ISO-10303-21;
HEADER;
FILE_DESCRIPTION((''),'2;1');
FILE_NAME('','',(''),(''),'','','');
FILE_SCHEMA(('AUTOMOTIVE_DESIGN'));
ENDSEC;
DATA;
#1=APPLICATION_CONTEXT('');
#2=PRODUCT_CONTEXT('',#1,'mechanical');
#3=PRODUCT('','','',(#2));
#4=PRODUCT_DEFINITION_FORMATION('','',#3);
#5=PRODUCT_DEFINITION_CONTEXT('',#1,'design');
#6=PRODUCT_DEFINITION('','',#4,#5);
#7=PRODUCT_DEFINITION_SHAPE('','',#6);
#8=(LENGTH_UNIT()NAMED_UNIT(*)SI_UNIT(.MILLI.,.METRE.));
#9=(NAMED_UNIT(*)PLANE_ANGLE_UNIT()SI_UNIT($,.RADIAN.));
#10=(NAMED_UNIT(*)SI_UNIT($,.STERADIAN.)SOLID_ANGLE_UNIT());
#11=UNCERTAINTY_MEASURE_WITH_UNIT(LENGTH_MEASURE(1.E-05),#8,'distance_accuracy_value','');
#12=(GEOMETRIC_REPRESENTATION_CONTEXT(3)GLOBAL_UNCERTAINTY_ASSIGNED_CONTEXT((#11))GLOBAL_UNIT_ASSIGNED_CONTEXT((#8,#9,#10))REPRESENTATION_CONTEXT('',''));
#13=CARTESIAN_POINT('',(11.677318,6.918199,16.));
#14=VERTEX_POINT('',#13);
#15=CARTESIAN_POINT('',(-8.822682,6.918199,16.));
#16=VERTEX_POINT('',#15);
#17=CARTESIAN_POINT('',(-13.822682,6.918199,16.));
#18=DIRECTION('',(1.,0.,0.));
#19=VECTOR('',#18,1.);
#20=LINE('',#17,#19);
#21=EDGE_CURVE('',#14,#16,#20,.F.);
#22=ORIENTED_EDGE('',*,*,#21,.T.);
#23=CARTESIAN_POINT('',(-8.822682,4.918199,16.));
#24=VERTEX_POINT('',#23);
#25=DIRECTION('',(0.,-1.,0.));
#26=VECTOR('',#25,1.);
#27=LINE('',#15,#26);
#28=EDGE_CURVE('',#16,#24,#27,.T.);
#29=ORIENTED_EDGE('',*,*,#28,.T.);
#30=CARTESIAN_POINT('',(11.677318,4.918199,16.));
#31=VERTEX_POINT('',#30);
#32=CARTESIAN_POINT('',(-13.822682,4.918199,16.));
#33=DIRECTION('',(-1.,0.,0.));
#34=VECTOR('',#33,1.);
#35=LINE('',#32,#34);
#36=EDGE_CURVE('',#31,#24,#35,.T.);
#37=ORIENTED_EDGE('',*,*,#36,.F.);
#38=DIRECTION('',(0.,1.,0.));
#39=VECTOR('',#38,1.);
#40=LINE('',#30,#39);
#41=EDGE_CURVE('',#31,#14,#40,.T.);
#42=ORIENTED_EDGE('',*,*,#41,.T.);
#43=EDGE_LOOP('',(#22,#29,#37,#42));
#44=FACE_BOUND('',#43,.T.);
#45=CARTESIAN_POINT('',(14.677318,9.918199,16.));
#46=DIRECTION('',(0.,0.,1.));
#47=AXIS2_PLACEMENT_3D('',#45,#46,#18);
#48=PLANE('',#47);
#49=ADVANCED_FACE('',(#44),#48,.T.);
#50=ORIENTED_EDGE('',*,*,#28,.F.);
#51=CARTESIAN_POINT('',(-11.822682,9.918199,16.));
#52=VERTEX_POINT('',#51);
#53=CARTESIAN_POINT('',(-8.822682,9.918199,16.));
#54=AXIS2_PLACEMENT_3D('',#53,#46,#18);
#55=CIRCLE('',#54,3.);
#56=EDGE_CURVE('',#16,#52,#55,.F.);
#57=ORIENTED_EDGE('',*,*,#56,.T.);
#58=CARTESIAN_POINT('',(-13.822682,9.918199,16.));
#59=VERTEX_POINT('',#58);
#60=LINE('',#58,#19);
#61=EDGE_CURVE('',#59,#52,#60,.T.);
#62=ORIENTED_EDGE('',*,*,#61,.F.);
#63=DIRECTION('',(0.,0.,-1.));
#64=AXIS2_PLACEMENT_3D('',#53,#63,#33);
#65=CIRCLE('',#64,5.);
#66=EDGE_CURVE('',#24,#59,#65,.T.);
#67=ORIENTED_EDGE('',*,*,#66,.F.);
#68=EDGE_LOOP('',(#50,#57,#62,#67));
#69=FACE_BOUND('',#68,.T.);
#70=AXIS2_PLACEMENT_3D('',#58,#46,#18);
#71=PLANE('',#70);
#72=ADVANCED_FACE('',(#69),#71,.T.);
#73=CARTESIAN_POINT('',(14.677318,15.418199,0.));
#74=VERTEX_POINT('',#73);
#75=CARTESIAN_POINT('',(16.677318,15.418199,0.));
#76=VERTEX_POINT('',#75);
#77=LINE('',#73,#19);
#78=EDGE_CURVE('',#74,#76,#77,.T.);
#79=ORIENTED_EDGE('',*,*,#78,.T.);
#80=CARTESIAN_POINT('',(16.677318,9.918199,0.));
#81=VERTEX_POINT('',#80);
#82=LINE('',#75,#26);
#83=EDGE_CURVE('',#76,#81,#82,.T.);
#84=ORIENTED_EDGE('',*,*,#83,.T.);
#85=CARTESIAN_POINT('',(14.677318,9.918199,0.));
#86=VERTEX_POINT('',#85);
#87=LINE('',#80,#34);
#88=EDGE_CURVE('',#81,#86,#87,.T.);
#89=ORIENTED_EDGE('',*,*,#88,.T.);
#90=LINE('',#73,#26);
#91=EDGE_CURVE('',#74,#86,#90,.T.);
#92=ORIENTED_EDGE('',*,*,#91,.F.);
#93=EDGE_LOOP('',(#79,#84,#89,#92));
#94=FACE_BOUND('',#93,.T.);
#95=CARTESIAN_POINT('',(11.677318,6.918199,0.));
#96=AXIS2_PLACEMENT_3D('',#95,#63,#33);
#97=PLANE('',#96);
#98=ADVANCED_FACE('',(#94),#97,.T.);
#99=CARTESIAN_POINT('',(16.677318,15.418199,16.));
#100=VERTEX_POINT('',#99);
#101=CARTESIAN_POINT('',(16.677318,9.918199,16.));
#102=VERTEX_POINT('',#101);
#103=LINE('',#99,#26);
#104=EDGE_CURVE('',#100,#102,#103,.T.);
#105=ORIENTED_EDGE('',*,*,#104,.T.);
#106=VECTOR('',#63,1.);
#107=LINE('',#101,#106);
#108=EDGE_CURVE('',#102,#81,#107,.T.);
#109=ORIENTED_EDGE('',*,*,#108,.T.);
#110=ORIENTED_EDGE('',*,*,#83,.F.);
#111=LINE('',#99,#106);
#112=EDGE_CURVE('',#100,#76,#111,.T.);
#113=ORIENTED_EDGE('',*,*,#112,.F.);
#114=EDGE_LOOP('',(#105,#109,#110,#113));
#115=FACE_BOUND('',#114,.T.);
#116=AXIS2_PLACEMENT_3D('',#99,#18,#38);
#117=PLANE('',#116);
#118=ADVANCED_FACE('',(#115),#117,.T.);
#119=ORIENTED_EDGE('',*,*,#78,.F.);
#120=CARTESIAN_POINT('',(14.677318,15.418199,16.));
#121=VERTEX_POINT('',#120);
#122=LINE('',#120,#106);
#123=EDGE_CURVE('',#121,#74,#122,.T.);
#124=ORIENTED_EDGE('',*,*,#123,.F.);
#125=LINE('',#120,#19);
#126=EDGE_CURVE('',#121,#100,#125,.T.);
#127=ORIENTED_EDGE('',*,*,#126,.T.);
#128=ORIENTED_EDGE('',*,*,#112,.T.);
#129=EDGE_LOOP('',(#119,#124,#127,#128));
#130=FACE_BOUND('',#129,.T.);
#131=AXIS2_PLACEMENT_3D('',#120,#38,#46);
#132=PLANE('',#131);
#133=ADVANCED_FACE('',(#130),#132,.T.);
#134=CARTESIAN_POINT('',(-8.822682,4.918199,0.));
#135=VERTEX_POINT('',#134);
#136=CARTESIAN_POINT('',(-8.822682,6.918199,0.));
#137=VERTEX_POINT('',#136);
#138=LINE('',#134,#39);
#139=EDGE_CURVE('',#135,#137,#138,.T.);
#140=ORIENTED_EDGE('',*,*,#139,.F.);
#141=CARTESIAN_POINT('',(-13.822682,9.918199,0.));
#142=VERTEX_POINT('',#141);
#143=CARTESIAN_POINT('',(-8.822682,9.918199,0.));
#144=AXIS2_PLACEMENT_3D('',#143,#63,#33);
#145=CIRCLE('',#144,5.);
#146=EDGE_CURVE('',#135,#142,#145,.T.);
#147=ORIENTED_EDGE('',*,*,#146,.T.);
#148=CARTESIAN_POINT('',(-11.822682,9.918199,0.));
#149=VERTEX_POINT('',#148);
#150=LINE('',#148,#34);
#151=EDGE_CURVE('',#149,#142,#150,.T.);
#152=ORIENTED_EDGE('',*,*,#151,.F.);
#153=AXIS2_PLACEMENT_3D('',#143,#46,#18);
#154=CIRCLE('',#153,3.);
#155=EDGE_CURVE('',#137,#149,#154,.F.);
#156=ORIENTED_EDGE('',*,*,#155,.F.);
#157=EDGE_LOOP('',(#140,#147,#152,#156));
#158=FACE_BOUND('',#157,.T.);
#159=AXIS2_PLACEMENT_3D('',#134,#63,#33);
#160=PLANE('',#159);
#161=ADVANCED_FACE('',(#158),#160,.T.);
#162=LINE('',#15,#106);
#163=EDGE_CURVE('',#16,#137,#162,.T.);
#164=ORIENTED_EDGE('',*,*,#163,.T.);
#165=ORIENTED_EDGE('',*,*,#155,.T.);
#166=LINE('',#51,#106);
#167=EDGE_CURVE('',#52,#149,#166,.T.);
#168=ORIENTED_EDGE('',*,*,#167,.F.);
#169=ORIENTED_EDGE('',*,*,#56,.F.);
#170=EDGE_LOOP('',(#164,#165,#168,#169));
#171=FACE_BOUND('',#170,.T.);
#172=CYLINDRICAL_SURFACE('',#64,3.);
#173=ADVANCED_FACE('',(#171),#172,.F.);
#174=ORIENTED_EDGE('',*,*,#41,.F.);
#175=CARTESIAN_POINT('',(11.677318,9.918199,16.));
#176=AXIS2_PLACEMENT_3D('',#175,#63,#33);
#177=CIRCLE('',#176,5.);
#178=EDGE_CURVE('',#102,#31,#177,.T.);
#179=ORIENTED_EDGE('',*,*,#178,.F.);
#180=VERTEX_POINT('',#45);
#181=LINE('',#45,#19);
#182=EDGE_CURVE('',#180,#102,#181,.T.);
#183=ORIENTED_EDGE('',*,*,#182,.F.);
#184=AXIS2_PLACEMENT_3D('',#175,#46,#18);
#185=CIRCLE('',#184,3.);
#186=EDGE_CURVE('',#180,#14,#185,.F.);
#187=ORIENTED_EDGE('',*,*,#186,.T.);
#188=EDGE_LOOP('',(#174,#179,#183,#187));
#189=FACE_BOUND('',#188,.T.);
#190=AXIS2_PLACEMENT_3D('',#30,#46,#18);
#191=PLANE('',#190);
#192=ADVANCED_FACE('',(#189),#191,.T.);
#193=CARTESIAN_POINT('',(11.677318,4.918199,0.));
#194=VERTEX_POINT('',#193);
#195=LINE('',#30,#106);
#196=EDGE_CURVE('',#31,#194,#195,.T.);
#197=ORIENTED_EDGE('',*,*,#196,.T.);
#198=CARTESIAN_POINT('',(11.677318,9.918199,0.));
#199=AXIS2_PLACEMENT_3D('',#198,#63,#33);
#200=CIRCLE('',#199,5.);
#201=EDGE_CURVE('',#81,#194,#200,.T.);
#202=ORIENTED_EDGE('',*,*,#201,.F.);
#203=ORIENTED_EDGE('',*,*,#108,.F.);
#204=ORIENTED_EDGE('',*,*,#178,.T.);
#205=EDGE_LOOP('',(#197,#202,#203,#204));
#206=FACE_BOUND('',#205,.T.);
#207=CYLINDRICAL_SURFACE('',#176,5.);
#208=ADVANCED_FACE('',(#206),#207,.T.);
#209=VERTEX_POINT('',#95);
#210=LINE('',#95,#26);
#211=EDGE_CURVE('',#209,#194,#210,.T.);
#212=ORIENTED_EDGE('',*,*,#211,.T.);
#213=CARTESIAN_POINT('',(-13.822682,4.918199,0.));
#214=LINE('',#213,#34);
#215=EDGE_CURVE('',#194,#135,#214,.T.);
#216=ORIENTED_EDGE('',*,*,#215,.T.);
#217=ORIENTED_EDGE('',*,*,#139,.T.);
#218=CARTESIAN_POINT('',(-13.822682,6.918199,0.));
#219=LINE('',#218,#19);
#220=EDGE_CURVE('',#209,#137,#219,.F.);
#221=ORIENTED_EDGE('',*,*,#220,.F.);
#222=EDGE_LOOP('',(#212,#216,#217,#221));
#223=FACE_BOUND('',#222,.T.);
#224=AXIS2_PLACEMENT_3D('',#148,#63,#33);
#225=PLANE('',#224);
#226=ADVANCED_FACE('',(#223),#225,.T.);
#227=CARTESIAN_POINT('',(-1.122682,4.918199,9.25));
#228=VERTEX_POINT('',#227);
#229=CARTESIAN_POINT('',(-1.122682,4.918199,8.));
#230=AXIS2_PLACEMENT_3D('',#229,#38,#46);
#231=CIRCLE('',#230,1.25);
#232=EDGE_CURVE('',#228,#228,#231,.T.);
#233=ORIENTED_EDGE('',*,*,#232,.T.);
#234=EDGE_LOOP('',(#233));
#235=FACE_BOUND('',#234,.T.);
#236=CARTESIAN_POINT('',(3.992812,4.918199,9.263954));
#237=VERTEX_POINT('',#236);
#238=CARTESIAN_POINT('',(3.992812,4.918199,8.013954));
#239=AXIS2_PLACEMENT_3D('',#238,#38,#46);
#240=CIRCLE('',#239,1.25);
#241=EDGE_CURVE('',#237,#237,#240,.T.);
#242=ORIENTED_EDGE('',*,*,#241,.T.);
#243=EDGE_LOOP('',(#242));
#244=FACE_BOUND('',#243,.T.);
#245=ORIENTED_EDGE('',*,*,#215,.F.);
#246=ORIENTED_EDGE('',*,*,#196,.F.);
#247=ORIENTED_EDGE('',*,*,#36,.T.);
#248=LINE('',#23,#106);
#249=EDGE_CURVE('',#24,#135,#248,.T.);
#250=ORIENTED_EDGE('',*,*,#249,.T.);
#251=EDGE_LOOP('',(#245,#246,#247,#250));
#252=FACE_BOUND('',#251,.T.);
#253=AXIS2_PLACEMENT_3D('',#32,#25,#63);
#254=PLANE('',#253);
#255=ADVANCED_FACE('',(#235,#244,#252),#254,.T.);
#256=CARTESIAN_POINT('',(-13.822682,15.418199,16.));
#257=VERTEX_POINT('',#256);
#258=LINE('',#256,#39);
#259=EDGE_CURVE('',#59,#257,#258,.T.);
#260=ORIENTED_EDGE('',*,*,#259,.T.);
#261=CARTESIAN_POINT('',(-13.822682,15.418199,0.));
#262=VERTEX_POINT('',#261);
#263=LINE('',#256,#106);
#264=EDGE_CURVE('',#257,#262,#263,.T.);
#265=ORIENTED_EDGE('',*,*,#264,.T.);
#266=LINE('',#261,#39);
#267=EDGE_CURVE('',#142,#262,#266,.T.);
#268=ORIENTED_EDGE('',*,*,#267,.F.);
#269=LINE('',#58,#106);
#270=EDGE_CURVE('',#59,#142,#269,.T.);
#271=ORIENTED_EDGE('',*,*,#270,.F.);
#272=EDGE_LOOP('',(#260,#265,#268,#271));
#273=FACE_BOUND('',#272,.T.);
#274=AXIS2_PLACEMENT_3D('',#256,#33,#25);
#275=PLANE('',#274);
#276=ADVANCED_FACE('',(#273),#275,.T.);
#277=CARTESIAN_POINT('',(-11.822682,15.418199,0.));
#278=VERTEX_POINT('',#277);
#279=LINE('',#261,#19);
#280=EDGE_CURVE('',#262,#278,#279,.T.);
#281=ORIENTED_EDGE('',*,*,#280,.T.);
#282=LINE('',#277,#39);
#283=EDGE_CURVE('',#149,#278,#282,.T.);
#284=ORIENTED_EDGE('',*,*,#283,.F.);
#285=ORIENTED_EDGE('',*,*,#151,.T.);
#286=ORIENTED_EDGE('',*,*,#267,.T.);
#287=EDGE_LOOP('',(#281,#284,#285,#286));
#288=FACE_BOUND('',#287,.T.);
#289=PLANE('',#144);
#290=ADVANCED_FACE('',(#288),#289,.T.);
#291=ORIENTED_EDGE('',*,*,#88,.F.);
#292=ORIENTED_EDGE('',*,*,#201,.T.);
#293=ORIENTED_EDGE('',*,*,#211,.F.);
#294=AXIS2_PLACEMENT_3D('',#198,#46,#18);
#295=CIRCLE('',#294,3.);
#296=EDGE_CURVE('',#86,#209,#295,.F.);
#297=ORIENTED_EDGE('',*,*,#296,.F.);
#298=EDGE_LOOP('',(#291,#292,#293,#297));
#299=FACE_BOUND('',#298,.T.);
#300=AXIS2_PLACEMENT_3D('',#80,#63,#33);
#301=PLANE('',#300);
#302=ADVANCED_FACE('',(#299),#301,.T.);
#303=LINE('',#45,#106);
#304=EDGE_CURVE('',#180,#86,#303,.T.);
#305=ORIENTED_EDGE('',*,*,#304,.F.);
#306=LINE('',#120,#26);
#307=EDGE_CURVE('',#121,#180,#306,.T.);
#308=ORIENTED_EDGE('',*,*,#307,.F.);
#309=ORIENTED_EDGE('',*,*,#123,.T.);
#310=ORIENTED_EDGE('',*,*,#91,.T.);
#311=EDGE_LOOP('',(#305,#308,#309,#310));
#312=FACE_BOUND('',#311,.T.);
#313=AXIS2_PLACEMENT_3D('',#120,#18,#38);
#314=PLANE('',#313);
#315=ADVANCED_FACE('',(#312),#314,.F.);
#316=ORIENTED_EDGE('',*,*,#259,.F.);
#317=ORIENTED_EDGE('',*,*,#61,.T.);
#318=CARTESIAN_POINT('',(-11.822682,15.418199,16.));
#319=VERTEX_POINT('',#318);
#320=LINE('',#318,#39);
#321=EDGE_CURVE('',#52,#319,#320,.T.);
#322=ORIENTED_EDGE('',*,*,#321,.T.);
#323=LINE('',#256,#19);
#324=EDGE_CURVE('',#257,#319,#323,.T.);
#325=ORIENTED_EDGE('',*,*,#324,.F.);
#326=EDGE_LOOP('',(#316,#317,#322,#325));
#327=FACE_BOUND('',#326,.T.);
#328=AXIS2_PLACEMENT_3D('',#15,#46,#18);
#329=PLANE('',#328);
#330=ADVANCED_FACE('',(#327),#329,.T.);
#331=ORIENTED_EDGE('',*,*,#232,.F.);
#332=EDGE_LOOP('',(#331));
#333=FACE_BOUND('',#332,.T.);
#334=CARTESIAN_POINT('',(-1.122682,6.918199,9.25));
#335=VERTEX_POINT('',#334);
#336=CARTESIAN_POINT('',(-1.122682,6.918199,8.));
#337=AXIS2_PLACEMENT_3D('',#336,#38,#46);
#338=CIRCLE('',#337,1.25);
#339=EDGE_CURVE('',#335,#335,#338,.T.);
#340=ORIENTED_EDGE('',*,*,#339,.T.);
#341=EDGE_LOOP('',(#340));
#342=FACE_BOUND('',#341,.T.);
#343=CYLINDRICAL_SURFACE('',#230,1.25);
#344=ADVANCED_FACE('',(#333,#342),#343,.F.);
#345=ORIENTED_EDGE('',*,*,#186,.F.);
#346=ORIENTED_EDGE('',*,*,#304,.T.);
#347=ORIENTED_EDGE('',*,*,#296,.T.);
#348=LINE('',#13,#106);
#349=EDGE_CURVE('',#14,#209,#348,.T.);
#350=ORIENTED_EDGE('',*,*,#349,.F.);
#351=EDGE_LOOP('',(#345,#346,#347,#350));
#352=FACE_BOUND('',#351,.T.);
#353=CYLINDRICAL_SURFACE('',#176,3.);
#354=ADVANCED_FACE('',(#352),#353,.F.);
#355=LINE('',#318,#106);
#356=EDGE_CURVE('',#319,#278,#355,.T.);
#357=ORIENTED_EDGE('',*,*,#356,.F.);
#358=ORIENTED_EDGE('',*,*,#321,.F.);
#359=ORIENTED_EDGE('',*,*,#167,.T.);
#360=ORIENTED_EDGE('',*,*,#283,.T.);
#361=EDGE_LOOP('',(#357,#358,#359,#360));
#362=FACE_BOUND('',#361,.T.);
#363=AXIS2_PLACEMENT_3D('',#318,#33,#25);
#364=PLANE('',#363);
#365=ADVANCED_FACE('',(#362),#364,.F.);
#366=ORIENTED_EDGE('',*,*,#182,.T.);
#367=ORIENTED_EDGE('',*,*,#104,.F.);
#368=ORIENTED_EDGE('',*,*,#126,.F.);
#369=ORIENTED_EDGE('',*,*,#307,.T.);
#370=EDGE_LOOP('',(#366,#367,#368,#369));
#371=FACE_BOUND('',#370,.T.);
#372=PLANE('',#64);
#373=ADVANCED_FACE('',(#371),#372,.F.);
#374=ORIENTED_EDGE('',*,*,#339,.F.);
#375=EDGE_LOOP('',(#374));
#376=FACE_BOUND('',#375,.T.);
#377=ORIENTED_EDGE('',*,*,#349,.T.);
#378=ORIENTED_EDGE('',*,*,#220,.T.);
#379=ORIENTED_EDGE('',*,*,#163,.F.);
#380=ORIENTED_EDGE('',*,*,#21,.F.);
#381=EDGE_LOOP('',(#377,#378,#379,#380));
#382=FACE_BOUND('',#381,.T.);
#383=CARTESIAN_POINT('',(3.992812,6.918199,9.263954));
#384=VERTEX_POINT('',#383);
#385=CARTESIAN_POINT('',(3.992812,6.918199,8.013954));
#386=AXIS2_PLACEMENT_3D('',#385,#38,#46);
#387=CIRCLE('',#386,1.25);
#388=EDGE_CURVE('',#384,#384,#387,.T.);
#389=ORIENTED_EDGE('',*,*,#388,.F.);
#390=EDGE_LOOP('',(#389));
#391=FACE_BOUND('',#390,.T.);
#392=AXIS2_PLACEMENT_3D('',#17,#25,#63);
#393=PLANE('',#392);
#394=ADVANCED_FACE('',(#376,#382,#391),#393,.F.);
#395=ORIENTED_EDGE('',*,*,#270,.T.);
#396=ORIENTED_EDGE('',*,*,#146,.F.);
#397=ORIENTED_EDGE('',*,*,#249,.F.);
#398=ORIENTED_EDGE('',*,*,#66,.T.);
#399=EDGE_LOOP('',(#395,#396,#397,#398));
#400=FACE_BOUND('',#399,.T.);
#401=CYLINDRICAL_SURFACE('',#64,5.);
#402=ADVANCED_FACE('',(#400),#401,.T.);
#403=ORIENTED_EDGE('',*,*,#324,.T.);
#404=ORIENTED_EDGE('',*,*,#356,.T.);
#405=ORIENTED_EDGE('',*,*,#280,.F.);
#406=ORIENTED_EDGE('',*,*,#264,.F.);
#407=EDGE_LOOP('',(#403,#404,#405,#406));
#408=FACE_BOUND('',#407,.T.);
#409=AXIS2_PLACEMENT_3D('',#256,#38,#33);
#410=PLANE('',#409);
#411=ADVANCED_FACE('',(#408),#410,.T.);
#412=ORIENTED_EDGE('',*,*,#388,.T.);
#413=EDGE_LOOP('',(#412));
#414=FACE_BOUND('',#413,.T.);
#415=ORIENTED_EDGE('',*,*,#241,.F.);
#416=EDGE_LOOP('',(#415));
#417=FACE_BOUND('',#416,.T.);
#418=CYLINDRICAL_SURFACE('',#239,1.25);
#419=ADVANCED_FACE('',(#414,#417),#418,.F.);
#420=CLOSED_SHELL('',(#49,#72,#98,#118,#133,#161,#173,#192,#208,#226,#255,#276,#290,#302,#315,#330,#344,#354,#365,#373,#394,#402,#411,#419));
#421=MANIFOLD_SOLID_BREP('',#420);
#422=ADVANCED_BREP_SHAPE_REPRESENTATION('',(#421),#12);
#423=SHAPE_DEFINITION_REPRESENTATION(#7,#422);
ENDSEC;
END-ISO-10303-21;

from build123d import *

# Parameters (mm, degrees)
BASE_FLANGE1_DEPTH = 16
SKETCH8_R          = 1.25
CUT_EXTRUDE1_DEPTH = 2


# Sheet-metal steps are written as plain solids
with BuildPart() as part:
    # Sketch1 → Base-Flange1 (new body)
    with BuildSketch(Plane.XY):
        with BuildLine():
            Line((-13.822681927, 15.418198529), (-13.822681927, 9.918198529))
            ThreePointArc((-13.822681927, 9.918198529), (-12.358215833, 6.382664623), (-8.822681927, 4.918198529))
            Line((-8.822681927, 4.918198529), (11.677318073, 4.918198529))
            ThreePointArc((11.677318073, 4.918198529), (15.212851979, 6.382664623), (16.677318073, 9.918198529))
            Line((16.677318073, 9.918198529), (16.677318073, 15.418198529))
            Line((16.677318073, 15.418198529), (14.677318073, 15.418198529))
            Line((14.677318073, 15.418198529), (14.677318073, 9.918198529))
            ThreePointArc((14.677318073, 9.918198529), (13.798638417, 7.796878186), (11.677318073, 6.918198529))
            Line((11.677318073, 6.918198529), (-8.822681927, 6.918198529))
            ThreePointArc((-8.822681927, 6.918198529), (-10.94400227, 7.796878186), (-11.822681927, 9.918198529))
            Line((-11.822681927, 9.918198529), (-11.822681927, 15.418198529))
            Line((-11.822681927, 15.418198529), (-13.822681927, 15.418198529))
        make_face()
    extrude(amount=BASE_FLANGE1_DEPTH)

    # Sketch8 → Cut-Extrude1 (cut)
    with BuildSketch(Plane(origin=(0, 6.918198529, 0), x_dir=(1, 0, 0), z_dir=(0, 1, 0))):
        with Locations(Location((3.992812071, -8.013954427, 0), (0, 0, 270))):
            Circle(SKETCH8_R)
        with Locations(Location((-1.122681927, -8, 0), (0, 0, 270))):
            Circle(SKETCH8_R)
    extrude(amount=-CUT_EXTRUDE1_DEPTH, mode=Mode.SUBTRACT)


solid = part.part
